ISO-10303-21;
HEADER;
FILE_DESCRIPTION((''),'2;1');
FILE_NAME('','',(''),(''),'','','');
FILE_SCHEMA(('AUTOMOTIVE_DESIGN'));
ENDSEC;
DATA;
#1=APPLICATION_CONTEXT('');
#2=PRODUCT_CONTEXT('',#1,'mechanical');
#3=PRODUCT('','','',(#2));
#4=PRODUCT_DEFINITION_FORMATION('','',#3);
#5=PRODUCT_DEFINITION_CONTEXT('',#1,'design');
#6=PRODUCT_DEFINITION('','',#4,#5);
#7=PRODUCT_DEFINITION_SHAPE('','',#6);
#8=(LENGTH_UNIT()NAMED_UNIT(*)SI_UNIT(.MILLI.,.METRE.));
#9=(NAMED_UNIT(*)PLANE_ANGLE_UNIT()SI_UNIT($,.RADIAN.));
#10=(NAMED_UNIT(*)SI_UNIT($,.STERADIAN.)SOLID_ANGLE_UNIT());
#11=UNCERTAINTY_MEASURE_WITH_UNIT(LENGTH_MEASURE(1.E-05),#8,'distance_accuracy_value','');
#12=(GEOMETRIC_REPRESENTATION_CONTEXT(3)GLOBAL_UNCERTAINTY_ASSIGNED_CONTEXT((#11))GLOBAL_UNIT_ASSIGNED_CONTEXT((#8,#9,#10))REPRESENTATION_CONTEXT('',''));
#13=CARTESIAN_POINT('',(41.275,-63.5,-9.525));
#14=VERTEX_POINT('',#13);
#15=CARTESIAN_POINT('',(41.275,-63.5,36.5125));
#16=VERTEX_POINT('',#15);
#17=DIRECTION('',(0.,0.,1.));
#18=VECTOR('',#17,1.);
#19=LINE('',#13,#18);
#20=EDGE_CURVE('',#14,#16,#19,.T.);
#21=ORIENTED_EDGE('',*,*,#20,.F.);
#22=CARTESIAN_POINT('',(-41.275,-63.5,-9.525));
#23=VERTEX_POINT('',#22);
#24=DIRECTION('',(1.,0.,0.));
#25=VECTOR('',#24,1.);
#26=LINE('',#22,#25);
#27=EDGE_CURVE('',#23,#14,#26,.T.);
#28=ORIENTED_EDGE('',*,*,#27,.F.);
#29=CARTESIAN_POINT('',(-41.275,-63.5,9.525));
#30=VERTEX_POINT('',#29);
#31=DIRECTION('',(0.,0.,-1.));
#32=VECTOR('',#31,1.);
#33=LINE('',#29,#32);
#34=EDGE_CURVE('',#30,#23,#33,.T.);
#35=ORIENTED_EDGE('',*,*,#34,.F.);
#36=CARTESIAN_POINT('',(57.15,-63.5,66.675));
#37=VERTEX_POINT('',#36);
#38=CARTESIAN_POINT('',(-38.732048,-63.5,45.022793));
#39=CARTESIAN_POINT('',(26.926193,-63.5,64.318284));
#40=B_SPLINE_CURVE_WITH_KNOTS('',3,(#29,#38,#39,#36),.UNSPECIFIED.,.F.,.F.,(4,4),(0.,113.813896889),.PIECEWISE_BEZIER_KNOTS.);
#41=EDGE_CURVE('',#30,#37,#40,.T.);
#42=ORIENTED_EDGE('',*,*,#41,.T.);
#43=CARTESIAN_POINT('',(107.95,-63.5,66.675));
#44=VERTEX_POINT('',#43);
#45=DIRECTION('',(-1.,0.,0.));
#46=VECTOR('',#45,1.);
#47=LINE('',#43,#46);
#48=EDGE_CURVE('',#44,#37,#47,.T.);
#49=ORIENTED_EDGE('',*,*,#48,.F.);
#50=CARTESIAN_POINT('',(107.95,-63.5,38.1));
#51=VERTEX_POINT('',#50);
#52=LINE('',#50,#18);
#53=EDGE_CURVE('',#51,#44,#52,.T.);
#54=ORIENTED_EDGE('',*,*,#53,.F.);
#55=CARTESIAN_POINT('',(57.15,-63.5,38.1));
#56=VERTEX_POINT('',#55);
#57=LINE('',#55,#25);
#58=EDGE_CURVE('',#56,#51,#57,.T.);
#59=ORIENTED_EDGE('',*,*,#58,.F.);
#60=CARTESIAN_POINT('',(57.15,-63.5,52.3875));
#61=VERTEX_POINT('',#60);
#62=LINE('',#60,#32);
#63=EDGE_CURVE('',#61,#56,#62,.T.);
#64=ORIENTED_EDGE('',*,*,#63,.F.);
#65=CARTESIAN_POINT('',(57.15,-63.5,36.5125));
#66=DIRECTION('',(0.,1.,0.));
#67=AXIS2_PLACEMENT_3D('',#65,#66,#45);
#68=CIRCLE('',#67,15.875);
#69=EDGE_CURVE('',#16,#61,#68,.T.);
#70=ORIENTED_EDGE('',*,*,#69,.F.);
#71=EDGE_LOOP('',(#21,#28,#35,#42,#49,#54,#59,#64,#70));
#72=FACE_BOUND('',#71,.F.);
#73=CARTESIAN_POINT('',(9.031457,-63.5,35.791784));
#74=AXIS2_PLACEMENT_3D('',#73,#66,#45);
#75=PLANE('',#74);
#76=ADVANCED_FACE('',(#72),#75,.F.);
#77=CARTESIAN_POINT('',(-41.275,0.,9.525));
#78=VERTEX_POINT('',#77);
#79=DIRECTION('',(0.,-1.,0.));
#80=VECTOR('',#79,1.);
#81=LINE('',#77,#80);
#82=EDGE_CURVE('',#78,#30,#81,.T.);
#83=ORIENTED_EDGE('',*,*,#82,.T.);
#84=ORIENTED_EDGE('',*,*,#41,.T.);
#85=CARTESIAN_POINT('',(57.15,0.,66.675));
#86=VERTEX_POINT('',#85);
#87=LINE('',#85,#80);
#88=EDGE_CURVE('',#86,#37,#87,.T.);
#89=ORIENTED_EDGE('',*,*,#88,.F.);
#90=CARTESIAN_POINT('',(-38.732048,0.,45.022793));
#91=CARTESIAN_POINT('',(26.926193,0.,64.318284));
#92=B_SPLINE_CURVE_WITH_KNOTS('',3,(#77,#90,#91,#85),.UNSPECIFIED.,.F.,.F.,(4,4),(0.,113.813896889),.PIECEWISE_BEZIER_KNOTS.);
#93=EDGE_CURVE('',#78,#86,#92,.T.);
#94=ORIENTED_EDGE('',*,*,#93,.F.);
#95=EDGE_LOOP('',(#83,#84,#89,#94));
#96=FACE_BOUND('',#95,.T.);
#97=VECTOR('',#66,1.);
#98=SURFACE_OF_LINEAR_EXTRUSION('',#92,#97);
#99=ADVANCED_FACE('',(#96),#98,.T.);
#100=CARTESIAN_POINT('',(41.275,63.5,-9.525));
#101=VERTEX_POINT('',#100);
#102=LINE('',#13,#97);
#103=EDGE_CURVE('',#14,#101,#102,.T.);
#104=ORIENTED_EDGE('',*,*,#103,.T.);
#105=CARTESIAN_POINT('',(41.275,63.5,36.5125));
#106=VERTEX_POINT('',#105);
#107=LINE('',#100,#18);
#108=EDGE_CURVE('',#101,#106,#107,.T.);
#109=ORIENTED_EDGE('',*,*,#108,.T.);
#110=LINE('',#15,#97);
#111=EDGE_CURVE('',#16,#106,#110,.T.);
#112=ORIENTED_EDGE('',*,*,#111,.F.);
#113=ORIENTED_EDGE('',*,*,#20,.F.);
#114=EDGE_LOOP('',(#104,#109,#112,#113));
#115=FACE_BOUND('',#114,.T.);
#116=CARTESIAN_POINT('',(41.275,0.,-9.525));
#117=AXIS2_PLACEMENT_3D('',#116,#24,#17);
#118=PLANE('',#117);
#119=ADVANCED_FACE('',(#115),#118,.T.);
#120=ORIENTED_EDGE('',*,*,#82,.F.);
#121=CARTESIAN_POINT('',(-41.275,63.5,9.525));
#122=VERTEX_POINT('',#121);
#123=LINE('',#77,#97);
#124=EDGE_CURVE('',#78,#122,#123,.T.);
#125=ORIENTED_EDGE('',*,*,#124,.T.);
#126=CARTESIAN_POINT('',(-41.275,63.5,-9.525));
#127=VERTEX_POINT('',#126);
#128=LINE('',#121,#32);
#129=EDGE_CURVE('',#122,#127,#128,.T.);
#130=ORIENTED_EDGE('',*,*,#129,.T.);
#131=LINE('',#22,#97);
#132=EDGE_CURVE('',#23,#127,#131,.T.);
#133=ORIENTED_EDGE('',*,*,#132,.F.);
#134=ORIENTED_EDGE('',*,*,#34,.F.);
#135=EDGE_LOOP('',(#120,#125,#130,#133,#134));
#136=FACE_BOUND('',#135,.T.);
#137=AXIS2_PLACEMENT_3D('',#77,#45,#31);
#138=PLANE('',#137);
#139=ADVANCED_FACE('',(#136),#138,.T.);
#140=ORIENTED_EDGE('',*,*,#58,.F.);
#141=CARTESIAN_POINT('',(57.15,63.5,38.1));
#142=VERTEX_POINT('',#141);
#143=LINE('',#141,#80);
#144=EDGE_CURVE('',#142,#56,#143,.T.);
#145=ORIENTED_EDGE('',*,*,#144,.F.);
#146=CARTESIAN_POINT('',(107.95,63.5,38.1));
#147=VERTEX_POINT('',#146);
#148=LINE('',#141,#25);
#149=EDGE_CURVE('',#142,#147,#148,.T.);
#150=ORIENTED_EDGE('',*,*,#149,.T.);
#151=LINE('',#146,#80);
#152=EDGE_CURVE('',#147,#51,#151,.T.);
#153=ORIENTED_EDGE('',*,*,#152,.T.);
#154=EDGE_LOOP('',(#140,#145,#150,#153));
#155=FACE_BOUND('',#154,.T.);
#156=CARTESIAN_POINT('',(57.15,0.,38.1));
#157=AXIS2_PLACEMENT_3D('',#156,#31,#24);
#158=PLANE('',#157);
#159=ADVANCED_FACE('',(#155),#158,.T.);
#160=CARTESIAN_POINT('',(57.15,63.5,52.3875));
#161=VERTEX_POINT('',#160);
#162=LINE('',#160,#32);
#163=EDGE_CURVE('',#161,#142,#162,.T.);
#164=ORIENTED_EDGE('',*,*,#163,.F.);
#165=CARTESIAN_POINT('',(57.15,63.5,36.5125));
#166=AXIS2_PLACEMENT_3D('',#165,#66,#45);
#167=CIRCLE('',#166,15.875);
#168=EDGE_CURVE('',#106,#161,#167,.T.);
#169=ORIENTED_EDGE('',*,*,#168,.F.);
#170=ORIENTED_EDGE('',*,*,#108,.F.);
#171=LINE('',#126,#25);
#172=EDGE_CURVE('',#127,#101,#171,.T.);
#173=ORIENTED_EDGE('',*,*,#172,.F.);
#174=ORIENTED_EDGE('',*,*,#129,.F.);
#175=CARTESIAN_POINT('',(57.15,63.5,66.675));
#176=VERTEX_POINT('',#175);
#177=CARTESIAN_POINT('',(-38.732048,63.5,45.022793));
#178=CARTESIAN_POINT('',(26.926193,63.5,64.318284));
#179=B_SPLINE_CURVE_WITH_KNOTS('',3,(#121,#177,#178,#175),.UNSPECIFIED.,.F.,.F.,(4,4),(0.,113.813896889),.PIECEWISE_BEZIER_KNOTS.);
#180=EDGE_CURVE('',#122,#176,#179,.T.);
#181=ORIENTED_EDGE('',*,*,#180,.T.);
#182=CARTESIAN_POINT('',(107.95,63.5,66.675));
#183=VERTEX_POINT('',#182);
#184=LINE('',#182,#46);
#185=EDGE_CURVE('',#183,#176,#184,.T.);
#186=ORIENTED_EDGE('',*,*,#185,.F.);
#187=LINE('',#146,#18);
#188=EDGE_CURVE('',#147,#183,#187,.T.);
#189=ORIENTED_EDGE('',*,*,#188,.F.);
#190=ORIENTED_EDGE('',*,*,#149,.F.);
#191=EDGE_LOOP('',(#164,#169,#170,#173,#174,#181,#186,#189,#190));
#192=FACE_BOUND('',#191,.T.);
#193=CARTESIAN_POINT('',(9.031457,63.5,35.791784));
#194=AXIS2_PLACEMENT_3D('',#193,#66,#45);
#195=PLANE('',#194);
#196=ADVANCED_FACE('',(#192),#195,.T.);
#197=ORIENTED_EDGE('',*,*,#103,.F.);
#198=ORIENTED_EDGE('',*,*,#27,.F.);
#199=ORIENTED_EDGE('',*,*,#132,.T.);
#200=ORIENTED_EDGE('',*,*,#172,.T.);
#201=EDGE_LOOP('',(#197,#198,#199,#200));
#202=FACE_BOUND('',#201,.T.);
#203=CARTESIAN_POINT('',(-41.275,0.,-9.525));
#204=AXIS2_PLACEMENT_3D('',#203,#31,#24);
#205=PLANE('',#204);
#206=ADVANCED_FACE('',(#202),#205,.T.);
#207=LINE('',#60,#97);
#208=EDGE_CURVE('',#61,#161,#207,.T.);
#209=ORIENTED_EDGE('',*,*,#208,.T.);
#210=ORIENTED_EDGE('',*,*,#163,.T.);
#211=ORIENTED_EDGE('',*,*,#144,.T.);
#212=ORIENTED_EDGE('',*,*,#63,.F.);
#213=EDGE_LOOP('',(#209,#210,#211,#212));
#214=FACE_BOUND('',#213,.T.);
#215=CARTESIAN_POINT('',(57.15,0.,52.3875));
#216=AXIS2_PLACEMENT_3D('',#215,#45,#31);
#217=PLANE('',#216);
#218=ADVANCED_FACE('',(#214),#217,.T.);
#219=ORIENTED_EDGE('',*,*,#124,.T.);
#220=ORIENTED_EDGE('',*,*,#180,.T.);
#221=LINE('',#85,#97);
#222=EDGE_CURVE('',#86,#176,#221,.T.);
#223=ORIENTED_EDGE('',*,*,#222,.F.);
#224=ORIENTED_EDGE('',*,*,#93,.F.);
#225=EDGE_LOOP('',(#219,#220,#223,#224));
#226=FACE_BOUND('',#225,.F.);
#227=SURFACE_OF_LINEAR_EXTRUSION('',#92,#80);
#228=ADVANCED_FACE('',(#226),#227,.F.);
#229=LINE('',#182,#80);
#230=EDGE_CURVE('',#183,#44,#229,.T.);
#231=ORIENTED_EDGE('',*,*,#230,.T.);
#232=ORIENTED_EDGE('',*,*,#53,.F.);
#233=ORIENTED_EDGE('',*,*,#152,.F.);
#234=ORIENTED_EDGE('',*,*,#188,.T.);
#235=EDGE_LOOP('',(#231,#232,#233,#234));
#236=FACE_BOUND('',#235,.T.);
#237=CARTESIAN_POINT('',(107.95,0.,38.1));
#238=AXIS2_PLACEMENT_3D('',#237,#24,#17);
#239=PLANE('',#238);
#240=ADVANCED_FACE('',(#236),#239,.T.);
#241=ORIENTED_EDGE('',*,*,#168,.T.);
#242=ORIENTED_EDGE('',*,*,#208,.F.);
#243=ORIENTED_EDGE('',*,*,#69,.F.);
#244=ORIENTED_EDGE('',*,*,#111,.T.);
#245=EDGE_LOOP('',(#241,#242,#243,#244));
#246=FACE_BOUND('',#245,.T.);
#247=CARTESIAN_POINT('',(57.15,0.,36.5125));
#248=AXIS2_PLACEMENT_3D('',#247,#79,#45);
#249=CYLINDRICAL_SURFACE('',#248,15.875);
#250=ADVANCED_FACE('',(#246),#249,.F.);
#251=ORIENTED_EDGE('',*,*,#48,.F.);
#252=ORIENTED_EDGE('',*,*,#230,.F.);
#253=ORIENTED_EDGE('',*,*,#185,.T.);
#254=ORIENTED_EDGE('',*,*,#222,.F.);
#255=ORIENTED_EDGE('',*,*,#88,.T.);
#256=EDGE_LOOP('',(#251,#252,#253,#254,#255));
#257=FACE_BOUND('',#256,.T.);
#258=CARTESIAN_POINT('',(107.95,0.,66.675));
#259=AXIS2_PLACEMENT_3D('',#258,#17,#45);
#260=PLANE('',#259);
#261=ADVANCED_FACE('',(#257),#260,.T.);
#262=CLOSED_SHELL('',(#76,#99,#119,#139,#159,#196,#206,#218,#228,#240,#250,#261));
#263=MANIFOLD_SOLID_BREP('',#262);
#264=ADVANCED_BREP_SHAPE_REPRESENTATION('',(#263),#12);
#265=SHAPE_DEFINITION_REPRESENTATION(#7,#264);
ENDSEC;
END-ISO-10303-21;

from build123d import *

# Parameters (mm, degrees)
F0_W     = 25.4
F0_H     = 13.97
F1_DEPTH = 63.5


with BuildPart() as f1:
    # F0 (on Front) → F1 (new body, symmetric)
    with BuildSketch(Plane.XZ):
        with BuildLine():
            add(Edge.make_bspline(
                [(-41.275, 9.525), (-38.7320481241, 45.0227931142), (26.9261933863, 64.3182843924), (57.15, 66.675)],
                knots=[0, 0, 0, 0, 113.8138968887, 113.8138968887, 113.8138968887, 113.8138968887], degree=3))
            Line((-41.275, 9.525), (27.305, 9.525))
            Line((27.305, 9.525), (27.305, 36.5125))
            ThreePointArc((27.305, 36.5125), (36.0463981155, 57.6161018845), (57.15, 66.3575))
            Line((57.15, 66.3575), (57.15, 66.675))
        make_face()
        Polygon((27.305, 9.525), (-41.275, 9.525), (-41.275, -9.525), (41.275, -9.525), (41.275, 9.525), align=None)
        with BuildLine():
            Line((27.305, 36.5125), (27.305, 9.525))
            Line((27.305, 9.525), (41.275, 9.525))
            Line((41.275, 9.525), (41.275, 36.5125))
            ThreePointArc((41.275, 36.5125), (45.9246798487, 47.7378201513), (57.15, 52.3875))
            Line((57.15, 52.3875), (57.15, 66.3575))
            ThreePointArc((57.15, 66.3575), (36.0463981155, 57.6161018845), (27.305, 36.5125))
        make_face()
        Polygon((107.95, 66.675), (57.15, 66.675), (57.15, 66.3575), (82.55, 66.3575), (82.55, 52.3875), (57.15, 52.3875), (57.15, 38.1), (107.95, 38.1), align=None)
        with Locations((69.85, 59.3725)):
            Rectangle(F0_W, F0_H)
    extrude(amount=F1_DEPTH, both=True)


solid = f1.part
